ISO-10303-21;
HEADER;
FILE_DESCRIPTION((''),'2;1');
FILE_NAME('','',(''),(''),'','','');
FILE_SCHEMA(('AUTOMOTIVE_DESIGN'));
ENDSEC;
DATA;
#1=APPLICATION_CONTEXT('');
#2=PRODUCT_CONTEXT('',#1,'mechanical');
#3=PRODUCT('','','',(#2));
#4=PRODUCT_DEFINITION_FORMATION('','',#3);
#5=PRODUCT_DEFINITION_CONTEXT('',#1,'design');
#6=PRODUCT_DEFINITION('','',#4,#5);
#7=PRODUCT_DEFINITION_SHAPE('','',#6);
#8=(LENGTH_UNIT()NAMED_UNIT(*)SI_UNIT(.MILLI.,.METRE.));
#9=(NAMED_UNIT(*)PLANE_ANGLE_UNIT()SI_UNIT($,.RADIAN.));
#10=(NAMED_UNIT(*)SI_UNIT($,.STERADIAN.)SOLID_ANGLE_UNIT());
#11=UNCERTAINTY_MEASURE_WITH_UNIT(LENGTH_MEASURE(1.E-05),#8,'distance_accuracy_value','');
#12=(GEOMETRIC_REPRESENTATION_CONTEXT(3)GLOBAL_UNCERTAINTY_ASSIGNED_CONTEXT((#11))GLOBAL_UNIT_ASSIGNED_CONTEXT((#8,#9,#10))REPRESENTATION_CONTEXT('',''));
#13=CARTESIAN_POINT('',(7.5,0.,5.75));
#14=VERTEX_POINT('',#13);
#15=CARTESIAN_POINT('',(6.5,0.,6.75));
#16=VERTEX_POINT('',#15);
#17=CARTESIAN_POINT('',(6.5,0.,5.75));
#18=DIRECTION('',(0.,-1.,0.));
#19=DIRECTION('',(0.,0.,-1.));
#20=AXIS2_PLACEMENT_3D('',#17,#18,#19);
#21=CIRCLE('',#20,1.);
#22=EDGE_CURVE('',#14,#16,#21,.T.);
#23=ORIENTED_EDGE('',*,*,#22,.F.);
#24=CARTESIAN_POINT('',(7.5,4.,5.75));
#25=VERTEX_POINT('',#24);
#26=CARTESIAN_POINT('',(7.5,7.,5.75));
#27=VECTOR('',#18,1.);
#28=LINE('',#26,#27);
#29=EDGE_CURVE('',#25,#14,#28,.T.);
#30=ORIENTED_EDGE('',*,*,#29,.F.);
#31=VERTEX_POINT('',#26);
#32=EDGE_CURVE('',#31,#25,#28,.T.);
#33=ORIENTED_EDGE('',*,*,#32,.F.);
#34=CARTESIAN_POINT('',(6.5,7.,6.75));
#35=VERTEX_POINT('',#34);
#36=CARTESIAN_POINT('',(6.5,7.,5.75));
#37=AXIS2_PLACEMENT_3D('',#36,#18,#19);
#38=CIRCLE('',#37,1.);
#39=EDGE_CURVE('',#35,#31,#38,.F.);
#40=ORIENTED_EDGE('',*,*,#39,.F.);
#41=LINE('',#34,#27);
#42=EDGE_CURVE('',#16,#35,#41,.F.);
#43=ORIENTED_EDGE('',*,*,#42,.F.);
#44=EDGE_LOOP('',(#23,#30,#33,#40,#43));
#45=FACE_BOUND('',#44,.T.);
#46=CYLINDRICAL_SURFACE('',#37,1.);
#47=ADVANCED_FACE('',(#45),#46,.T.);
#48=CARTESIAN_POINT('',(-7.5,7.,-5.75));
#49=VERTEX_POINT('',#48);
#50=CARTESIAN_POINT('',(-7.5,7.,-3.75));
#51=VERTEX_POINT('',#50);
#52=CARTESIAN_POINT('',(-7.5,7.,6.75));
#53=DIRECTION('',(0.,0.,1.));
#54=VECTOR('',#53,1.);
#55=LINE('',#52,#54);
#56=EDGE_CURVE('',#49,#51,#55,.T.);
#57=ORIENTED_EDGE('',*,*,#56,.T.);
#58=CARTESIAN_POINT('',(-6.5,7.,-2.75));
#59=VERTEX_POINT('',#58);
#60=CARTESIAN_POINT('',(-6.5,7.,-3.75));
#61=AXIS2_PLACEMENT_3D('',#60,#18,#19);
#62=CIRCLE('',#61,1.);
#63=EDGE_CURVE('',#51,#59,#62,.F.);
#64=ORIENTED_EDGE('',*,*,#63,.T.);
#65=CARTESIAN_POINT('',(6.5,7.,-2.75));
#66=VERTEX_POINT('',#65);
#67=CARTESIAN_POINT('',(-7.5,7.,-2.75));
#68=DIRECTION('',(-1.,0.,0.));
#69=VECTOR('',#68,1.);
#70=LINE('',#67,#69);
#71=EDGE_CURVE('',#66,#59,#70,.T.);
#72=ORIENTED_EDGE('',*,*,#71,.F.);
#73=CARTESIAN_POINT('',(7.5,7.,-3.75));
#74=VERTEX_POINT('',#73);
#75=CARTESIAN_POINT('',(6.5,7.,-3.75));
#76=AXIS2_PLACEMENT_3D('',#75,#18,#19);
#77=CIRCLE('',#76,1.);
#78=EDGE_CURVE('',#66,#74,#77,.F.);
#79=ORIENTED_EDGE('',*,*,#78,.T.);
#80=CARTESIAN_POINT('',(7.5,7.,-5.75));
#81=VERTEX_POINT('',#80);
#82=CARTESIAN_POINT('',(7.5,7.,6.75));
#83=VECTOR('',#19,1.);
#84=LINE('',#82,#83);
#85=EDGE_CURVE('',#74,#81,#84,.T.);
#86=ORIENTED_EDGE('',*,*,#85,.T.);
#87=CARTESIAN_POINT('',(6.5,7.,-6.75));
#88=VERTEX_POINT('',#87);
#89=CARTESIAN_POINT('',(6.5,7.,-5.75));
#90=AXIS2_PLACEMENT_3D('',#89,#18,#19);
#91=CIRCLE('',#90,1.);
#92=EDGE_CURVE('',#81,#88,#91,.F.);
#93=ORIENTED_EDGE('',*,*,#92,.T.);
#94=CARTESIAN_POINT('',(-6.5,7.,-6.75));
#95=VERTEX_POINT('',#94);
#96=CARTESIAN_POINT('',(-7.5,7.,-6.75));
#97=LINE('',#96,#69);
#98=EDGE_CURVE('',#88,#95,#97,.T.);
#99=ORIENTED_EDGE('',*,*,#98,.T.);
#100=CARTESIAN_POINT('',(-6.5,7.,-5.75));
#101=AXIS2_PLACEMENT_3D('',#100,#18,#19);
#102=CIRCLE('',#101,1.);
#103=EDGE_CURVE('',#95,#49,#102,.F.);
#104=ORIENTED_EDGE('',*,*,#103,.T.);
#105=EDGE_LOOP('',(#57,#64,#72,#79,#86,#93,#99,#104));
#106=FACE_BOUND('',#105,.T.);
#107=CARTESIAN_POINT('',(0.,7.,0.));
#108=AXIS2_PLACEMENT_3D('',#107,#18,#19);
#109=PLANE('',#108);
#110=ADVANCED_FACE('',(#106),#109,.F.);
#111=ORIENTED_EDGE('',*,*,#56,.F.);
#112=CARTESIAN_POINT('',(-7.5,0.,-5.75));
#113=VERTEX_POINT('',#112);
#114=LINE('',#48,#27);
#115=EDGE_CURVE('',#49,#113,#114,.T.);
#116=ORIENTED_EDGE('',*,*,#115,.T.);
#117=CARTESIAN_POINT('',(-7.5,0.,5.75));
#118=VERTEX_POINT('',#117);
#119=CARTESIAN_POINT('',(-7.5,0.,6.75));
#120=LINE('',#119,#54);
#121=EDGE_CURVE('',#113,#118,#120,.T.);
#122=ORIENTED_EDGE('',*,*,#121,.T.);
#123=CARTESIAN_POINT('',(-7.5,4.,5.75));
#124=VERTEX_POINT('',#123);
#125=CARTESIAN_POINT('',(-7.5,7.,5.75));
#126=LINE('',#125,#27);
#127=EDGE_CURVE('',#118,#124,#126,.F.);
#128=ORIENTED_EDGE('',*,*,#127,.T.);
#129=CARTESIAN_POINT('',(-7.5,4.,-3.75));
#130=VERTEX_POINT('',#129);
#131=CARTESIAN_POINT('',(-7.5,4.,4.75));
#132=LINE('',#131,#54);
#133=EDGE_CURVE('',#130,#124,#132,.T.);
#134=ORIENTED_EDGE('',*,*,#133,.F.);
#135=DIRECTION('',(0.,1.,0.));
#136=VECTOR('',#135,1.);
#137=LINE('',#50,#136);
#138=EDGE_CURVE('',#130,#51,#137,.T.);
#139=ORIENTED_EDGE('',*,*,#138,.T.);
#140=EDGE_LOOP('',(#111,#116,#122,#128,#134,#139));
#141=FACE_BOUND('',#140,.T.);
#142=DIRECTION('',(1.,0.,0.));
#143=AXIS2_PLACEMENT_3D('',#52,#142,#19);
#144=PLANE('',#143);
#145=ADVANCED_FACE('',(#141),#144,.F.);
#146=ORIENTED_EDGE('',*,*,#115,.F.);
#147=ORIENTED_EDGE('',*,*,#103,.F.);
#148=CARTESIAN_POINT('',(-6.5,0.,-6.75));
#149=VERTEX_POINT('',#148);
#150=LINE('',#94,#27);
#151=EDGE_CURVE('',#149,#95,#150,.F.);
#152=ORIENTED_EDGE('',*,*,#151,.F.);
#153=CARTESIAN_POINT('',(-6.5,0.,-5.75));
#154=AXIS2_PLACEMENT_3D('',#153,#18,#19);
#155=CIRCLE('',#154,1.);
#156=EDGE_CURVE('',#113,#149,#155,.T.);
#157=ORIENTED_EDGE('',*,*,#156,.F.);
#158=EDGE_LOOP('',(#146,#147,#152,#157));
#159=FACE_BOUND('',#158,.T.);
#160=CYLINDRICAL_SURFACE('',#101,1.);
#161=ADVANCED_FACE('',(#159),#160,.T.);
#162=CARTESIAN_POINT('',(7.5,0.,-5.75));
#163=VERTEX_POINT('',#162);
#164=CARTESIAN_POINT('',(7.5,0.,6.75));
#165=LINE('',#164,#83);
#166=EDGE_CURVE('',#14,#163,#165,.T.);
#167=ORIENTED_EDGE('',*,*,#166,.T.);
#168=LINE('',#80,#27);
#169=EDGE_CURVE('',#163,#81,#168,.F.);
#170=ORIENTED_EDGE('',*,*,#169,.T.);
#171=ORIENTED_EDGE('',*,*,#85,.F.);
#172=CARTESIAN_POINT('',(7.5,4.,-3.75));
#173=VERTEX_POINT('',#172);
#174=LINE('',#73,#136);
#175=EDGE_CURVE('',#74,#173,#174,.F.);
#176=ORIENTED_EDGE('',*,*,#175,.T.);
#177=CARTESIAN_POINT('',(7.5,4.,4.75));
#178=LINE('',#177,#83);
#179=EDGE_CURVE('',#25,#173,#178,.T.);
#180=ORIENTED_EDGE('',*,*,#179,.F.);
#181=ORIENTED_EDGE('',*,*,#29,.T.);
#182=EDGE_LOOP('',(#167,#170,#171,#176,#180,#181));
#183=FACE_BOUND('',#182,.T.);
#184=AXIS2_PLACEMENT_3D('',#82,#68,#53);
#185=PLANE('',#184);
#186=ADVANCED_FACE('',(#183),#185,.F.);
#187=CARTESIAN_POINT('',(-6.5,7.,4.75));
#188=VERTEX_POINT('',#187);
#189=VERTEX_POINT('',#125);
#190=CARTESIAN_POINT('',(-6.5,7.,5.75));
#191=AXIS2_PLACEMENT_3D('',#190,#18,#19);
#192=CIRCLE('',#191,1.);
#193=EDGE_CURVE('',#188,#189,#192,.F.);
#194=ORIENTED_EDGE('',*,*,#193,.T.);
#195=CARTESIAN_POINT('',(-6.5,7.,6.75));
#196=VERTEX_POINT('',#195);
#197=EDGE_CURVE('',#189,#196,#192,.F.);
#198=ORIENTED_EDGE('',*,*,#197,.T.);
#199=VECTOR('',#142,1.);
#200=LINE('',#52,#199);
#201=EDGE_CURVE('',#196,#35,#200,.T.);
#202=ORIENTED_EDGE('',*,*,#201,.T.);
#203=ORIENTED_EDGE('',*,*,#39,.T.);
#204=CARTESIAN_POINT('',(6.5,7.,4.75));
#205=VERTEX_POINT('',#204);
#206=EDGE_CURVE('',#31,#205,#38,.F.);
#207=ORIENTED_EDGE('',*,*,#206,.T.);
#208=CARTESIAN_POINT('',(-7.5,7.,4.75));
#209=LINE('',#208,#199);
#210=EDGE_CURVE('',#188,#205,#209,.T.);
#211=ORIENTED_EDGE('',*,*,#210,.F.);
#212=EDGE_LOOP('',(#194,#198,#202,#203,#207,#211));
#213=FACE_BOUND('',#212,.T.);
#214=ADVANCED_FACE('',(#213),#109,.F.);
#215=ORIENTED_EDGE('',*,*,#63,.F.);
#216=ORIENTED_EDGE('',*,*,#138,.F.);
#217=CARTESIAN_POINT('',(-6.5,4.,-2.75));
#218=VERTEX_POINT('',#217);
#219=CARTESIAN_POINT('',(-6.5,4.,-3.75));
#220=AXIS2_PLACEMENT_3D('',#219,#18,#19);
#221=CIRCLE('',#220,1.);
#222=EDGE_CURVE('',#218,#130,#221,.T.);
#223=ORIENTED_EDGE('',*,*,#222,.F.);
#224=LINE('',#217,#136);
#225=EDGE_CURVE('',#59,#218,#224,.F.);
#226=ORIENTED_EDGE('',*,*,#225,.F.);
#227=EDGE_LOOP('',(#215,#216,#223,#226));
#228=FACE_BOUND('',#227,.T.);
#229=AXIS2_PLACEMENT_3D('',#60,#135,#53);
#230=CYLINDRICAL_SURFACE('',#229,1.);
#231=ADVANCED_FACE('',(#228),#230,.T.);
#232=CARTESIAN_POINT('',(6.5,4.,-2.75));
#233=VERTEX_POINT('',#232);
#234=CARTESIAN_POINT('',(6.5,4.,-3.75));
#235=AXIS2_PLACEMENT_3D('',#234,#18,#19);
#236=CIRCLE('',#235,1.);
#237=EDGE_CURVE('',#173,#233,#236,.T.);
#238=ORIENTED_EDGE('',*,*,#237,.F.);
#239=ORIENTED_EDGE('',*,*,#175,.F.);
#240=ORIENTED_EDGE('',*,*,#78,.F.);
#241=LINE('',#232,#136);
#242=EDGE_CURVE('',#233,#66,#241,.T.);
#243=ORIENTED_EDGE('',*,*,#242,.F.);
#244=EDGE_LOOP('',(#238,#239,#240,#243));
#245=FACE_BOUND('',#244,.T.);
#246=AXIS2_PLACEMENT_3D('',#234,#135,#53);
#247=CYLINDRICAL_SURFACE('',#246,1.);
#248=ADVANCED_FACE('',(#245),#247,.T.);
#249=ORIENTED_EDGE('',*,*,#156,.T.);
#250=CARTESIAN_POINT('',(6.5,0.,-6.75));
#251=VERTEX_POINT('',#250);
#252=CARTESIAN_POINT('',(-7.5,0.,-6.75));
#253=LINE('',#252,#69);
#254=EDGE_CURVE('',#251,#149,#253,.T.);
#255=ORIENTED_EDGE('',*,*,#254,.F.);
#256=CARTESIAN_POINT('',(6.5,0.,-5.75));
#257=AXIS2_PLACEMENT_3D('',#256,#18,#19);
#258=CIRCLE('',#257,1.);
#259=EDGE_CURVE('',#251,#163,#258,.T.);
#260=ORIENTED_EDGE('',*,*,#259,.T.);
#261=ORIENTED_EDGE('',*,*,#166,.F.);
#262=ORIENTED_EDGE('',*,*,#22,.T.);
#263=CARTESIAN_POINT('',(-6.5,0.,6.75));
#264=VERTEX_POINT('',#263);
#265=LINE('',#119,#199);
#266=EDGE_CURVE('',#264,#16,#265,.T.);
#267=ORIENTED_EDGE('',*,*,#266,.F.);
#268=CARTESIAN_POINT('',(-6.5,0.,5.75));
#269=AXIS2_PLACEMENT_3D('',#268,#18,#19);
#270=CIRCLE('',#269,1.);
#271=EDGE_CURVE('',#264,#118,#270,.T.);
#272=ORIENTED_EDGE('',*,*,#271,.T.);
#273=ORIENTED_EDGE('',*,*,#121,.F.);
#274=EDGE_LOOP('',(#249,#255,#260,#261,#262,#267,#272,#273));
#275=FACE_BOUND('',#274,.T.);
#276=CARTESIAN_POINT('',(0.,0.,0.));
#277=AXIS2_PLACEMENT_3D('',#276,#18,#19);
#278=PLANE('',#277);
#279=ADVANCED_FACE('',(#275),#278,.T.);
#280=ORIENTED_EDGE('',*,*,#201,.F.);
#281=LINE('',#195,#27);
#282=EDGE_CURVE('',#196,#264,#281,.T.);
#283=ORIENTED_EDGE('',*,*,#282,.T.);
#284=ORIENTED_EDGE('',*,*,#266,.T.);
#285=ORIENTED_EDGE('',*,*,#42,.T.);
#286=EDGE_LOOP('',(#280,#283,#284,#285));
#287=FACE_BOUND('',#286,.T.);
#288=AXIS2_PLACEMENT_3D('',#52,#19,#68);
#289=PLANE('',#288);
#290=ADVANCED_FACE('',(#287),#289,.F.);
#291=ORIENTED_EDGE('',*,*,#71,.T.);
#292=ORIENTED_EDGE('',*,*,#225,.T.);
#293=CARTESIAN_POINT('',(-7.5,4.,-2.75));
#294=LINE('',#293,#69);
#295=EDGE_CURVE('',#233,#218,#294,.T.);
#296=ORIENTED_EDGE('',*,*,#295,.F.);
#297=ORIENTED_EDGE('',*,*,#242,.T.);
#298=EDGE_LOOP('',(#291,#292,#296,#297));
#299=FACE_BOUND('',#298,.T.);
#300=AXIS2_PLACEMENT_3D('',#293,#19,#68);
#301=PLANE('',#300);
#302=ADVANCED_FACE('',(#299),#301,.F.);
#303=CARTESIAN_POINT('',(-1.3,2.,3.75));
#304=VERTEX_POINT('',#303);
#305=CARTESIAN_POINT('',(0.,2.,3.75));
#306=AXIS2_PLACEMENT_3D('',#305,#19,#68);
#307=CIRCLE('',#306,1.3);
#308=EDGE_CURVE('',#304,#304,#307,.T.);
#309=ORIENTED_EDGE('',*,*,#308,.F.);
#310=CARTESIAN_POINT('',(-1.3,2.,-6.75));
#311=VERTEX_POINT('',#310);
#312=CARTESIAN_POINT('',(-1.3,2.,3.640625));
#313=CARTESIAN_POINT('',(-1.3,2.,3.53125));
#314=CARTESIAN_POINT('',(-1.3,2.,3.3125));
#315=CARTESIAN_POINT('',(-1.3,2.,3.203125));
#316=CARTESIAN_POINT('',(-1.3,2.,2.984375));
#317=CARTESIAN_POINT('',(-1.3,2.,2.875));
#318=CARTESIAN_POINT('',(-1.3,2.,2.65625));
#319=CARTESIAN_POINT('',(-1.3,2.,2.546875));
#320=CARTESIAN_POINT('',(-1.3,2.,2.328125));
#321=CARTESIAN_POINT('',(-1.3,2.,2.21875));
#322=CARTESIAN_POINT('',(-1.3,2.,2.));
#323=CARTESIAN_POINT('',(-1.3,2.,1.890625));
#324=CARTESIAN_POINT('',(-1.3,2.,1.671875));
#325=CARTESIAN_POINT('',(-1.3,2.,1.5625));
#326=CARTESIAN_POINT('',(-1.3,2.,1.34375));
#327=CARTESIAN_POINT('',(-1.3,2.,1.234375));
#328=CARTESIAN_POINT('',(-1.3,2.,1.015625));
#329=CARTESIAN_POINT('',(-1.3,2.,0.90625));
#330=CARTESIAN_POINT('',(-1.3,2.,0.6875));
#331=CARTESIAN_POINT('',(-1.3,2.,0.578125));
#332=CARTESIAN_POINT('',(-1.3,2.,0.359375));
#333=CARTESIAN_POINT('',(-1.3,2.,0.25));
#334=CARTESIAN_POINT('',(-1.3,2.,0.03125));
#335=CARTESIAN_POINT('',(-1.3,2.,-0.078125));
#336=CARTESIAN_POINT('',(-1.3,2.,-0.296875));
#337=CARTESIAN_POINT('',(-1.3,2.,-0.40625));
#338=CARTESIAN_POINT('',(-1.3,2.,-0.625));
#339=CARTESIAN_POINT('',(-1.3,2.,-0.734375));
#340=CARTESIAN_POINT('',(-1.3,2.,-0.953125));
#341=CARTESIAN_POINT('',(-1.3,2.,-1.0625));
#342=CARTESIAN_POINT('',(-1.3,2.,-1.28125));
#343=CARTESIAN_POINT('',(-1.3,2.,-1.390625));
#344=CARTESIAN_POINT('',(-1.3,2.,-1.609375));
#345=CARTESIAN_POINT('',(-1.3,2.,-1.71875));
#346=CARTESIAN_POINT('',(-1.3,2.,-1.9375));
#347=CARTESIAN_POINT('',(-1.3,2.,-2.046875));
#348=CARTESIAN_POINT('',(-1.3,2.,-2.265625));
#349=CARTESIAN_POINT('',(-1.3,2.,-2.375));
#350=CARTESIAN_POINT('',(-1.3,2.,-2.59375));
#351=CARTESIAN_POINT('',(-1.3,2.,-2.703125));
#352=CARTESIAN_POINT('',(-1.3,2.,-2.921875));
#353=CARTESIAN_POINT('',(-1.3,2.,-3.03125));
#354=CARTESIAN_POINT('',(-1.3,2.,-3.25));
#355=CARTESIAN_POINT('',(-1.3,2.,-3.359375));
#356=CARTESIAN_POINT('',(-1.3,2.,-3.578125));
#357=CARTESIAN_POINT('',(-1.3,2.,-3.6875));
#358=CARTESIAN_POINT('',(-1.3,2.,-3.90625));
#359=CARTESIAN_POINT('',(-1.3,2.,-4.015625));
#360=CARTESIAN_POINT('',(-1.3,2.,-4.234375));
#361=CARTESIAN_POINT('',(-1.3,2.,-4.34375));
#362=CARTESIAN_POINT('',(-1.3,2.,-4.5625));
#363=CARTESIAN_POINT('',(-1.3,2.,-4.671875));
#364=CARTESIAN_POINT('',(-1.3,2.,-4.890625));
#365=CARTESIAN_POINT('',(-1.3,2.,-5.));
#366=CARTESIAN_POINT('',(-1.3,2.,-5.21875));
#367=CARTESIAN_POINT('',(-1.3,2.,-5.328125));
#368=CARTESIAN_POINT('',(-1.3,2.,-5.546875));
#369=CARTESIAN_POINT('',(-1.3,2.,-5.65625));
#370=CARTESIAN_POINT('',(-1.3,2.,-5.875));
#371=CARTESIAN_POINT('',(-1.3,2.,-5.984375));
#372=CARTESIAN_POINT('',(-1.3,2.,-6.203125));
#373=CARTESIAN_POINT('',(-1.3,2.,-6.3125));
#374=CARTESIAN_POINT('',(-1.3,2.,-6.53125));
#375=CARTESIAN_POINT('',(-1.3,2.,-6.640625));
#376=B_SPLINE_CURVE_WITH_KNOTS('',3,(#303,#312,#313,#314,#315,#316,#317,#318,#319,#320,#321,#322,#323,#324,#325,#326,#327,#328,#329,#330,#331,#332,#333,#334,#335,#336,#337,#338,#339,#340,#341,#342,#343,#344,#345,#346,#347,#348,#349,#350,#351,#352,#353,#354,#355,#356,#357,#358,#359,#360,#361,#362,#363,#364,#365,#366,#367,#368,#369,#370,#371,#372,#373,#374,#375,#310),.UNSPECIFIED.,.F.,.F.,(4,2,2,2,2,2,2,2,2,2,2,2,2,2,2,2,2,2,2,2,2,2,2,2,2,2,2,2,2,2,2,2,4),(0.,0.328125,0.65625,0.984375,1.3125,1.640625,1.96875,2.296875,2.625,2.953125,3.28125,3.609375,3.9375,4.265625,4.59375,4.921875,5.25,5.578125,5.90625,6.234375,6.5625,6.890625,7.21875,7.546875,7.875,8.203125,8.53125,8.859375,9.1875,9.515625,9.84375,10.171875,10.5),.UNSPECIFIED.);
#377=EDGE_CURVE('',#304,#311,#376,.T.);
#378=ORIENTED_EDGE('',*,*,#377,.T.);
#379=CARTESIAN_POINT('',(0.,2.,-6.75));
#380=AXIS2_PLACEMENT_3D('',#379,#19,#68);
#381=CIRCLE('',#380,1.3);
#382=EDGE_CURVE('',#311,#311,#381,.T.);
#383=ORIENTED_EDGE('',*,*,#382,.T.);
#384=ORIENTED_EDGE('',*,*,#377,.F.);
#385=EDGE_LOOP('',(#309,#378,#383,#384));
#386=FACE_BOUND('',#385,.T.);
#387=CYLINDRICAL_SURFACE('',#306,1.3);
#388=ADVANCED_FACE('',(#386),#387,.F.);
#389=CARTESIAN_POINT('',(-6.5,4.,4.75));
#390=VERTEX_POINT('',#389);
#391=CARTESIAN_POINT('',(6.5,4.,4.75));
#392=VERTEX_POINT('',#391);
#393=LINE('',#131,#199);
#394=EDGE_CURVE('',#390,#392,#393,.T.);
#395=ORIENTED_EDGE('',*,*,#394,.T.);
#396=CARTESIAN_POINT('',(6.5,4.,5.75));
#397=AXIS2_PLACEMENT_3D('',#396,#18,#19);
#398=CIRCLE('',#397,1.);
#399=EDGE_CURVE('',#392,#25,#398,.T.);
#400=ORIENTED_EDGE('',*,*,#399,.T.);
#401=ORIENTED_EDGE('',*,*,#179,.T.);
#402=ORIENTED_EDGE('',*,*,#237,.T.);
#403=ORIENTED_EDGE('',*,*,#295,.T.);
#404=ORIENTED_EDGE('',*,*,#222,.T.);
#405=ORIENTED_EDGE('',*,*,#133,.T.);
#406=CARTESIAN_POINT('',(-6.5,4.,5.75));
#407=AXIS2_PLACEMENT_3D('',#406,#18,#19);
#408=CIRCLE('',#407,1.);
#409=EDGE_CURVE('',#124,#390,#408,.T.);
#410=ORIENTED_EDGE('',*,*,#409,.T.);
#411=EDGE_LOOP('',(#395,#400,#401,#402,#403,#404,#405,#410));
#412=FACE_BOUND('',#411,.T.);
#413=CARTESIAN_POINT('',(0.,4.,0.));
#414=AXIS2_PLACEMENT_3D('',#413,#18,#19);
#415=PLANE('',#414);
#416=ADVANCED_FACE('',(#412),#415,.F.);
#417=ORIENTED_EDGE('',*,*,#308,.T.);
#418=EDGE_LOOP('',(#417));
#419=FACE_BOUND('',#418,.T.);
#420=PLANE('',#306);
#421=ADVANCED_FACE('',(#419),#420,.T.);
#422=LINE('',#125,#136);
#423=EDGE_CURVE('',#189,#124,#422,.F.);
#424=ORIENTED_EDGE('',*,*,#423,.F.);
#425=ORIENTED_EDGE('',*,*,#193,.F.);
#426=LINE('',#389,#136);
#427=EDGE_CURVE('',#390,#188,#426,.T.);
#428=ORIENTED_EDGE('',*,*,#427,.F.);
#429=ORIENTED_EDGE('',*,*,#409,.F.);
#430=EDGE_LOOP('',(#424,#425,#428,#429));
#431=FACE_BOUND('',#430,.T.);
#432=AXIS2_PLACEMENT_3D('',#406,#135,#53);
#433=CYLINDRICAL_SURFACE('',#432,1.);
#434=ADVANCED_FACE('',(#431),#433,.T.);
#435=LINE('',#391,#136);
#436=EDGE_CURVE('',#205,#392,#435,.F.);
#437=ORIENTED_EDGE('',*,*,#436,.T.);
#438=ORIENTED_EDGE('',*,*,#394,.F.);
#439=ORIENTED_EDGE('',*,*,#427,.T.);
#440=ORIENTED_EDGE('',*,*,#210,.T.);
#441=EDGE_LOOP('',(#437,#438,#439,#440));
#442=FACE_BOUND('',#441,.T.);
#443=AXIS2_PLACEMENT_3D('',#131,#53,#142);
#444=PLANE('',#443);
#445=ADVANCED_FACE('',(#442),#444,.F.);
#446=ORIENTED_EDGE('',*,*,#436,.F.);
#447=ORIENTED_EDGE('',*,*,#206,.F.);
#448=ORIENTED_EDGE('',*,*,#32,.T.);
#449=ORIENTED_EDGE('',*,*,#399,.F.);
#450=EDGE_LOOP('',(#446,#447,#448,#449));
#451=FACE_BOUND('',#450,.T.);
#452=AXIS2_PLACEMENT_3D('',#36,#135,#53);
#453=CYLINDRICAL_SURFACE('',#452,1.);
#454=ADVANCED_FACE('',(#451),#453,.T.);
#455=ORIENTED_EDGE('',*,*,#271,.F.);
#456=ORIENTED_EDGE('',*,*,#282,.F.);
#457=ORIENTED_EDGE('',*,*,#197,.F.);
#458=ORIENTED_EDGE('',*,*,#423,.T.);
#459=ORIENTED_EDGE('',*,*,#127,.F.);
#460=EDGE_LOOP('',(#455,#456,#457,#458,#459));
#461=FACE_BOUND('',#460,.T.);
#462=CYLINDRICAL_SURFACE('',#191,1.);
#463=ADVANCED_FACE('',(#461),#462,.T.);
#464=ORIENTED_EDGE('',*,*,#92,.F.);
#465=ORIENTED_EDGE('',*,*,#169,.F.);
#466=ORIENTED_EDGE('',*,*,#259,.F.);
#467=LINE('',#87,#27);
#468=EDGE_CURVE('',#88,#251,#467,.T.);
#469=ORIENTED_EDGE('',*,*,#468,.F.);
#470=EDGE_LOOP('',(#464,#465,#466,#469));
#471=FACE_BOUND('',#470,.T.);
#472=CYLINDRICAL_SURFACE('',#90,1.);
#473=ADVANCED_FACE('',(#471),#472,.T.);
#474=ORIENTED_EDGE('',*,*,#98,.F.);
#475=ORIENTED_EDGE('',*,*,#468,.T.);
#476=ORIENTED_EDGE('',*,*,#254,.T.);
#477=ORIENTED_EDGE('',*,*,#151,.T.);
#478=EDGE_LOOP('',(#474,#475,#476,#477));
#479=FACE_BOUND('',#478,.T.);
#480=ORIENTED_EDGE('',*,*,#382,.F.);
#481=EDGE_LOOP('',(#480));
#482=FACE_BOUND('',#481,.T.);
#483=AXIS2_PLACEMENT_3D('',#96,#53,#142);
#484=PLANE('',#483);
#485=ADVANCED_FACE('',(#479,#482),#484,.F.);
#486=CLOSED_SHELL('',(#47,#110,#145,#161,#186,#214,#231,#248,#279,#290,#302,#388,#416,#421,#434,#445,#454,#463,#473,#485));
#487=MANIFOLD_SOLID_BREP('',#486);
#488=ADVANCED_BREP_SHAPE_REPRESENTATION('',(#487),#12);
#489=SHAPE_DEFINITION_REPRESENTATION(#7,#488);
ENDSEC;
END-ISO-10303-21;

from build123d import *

# Parameters (mm, degrees)
SKETCH1_W           = 15
SKETCH1_H           = 13.5
BOSS_EXTRUDE1_DEPTH = 7
SKETCH2_W           = 15
SKETCH2_H           = 7.5
CUT_EXTRUDE2_DEPTH  = 3
SKETCH3_R           = 1.3
CUT_EXTRUDE3_DEPTH  = 10.5
FILLET1_R           = 1


with BuildPart() as part:
    # Sketch1 → Boss-Extrude1 (new body)
    with BuildSketch(Plane(origin=(0, 0, 0), x_dir=(1, 0, 0), z_dir=(0, 1, 0))):
        Rectangle(SKETCH1_W, SKETCH1_H)
    extrude(amount=BOSS_EXTRUDE1_DEPTH)

    # Sketch2 → Cut-Extrude2 (cut)
    with BuildSketch(Plane(origin=(0, 7, 0), x_dir=(1, 0, 0), z_dir=(0, 1, 0))):
        with Locations((0, -1)):
            Rectangle(SKETCH2_W, SKETCH2_H)
    extrude(amount=-CUT_EXTRUDE2_DEPTH, mode=Mode.SUBTRACT)

    # Sketch3 → Cut-Extrude3 (cut)
    with BuildSketch(Plane(origin=(0, 0, -6.75), x_dir=(-1, 0, 0), z_dir=(0, 0, -1))):
        with Locations((0, 2)):
            Circle(SKETCH3_R)
    extrude(amount=-CUT_EXTRUDE3_DEPTH, mode=Mode.SUBTRACT)

    # Fillet1
    fillet1_edges = [part.edges().sort_by_distance(p)[0] for p in [
        (7.5, 5.5, -2.75),
        (7.5, 5.5, 4.75),
        (-7.5, 5.5, 4.75),
        (-7.5, 5.5, -2.75),
        (7.5, 3.5, 6.75),
        (-7.5, 3.5, 6.75),
        (-7.5, 3.5, -6.75),
        (7.5, 3.5, -6.75),
    ]]
    fillet(fillet1_edges, radius=FILLET1_R - 0.0001)  # a hair under: the kernel refuses the full size


solid = part.part
